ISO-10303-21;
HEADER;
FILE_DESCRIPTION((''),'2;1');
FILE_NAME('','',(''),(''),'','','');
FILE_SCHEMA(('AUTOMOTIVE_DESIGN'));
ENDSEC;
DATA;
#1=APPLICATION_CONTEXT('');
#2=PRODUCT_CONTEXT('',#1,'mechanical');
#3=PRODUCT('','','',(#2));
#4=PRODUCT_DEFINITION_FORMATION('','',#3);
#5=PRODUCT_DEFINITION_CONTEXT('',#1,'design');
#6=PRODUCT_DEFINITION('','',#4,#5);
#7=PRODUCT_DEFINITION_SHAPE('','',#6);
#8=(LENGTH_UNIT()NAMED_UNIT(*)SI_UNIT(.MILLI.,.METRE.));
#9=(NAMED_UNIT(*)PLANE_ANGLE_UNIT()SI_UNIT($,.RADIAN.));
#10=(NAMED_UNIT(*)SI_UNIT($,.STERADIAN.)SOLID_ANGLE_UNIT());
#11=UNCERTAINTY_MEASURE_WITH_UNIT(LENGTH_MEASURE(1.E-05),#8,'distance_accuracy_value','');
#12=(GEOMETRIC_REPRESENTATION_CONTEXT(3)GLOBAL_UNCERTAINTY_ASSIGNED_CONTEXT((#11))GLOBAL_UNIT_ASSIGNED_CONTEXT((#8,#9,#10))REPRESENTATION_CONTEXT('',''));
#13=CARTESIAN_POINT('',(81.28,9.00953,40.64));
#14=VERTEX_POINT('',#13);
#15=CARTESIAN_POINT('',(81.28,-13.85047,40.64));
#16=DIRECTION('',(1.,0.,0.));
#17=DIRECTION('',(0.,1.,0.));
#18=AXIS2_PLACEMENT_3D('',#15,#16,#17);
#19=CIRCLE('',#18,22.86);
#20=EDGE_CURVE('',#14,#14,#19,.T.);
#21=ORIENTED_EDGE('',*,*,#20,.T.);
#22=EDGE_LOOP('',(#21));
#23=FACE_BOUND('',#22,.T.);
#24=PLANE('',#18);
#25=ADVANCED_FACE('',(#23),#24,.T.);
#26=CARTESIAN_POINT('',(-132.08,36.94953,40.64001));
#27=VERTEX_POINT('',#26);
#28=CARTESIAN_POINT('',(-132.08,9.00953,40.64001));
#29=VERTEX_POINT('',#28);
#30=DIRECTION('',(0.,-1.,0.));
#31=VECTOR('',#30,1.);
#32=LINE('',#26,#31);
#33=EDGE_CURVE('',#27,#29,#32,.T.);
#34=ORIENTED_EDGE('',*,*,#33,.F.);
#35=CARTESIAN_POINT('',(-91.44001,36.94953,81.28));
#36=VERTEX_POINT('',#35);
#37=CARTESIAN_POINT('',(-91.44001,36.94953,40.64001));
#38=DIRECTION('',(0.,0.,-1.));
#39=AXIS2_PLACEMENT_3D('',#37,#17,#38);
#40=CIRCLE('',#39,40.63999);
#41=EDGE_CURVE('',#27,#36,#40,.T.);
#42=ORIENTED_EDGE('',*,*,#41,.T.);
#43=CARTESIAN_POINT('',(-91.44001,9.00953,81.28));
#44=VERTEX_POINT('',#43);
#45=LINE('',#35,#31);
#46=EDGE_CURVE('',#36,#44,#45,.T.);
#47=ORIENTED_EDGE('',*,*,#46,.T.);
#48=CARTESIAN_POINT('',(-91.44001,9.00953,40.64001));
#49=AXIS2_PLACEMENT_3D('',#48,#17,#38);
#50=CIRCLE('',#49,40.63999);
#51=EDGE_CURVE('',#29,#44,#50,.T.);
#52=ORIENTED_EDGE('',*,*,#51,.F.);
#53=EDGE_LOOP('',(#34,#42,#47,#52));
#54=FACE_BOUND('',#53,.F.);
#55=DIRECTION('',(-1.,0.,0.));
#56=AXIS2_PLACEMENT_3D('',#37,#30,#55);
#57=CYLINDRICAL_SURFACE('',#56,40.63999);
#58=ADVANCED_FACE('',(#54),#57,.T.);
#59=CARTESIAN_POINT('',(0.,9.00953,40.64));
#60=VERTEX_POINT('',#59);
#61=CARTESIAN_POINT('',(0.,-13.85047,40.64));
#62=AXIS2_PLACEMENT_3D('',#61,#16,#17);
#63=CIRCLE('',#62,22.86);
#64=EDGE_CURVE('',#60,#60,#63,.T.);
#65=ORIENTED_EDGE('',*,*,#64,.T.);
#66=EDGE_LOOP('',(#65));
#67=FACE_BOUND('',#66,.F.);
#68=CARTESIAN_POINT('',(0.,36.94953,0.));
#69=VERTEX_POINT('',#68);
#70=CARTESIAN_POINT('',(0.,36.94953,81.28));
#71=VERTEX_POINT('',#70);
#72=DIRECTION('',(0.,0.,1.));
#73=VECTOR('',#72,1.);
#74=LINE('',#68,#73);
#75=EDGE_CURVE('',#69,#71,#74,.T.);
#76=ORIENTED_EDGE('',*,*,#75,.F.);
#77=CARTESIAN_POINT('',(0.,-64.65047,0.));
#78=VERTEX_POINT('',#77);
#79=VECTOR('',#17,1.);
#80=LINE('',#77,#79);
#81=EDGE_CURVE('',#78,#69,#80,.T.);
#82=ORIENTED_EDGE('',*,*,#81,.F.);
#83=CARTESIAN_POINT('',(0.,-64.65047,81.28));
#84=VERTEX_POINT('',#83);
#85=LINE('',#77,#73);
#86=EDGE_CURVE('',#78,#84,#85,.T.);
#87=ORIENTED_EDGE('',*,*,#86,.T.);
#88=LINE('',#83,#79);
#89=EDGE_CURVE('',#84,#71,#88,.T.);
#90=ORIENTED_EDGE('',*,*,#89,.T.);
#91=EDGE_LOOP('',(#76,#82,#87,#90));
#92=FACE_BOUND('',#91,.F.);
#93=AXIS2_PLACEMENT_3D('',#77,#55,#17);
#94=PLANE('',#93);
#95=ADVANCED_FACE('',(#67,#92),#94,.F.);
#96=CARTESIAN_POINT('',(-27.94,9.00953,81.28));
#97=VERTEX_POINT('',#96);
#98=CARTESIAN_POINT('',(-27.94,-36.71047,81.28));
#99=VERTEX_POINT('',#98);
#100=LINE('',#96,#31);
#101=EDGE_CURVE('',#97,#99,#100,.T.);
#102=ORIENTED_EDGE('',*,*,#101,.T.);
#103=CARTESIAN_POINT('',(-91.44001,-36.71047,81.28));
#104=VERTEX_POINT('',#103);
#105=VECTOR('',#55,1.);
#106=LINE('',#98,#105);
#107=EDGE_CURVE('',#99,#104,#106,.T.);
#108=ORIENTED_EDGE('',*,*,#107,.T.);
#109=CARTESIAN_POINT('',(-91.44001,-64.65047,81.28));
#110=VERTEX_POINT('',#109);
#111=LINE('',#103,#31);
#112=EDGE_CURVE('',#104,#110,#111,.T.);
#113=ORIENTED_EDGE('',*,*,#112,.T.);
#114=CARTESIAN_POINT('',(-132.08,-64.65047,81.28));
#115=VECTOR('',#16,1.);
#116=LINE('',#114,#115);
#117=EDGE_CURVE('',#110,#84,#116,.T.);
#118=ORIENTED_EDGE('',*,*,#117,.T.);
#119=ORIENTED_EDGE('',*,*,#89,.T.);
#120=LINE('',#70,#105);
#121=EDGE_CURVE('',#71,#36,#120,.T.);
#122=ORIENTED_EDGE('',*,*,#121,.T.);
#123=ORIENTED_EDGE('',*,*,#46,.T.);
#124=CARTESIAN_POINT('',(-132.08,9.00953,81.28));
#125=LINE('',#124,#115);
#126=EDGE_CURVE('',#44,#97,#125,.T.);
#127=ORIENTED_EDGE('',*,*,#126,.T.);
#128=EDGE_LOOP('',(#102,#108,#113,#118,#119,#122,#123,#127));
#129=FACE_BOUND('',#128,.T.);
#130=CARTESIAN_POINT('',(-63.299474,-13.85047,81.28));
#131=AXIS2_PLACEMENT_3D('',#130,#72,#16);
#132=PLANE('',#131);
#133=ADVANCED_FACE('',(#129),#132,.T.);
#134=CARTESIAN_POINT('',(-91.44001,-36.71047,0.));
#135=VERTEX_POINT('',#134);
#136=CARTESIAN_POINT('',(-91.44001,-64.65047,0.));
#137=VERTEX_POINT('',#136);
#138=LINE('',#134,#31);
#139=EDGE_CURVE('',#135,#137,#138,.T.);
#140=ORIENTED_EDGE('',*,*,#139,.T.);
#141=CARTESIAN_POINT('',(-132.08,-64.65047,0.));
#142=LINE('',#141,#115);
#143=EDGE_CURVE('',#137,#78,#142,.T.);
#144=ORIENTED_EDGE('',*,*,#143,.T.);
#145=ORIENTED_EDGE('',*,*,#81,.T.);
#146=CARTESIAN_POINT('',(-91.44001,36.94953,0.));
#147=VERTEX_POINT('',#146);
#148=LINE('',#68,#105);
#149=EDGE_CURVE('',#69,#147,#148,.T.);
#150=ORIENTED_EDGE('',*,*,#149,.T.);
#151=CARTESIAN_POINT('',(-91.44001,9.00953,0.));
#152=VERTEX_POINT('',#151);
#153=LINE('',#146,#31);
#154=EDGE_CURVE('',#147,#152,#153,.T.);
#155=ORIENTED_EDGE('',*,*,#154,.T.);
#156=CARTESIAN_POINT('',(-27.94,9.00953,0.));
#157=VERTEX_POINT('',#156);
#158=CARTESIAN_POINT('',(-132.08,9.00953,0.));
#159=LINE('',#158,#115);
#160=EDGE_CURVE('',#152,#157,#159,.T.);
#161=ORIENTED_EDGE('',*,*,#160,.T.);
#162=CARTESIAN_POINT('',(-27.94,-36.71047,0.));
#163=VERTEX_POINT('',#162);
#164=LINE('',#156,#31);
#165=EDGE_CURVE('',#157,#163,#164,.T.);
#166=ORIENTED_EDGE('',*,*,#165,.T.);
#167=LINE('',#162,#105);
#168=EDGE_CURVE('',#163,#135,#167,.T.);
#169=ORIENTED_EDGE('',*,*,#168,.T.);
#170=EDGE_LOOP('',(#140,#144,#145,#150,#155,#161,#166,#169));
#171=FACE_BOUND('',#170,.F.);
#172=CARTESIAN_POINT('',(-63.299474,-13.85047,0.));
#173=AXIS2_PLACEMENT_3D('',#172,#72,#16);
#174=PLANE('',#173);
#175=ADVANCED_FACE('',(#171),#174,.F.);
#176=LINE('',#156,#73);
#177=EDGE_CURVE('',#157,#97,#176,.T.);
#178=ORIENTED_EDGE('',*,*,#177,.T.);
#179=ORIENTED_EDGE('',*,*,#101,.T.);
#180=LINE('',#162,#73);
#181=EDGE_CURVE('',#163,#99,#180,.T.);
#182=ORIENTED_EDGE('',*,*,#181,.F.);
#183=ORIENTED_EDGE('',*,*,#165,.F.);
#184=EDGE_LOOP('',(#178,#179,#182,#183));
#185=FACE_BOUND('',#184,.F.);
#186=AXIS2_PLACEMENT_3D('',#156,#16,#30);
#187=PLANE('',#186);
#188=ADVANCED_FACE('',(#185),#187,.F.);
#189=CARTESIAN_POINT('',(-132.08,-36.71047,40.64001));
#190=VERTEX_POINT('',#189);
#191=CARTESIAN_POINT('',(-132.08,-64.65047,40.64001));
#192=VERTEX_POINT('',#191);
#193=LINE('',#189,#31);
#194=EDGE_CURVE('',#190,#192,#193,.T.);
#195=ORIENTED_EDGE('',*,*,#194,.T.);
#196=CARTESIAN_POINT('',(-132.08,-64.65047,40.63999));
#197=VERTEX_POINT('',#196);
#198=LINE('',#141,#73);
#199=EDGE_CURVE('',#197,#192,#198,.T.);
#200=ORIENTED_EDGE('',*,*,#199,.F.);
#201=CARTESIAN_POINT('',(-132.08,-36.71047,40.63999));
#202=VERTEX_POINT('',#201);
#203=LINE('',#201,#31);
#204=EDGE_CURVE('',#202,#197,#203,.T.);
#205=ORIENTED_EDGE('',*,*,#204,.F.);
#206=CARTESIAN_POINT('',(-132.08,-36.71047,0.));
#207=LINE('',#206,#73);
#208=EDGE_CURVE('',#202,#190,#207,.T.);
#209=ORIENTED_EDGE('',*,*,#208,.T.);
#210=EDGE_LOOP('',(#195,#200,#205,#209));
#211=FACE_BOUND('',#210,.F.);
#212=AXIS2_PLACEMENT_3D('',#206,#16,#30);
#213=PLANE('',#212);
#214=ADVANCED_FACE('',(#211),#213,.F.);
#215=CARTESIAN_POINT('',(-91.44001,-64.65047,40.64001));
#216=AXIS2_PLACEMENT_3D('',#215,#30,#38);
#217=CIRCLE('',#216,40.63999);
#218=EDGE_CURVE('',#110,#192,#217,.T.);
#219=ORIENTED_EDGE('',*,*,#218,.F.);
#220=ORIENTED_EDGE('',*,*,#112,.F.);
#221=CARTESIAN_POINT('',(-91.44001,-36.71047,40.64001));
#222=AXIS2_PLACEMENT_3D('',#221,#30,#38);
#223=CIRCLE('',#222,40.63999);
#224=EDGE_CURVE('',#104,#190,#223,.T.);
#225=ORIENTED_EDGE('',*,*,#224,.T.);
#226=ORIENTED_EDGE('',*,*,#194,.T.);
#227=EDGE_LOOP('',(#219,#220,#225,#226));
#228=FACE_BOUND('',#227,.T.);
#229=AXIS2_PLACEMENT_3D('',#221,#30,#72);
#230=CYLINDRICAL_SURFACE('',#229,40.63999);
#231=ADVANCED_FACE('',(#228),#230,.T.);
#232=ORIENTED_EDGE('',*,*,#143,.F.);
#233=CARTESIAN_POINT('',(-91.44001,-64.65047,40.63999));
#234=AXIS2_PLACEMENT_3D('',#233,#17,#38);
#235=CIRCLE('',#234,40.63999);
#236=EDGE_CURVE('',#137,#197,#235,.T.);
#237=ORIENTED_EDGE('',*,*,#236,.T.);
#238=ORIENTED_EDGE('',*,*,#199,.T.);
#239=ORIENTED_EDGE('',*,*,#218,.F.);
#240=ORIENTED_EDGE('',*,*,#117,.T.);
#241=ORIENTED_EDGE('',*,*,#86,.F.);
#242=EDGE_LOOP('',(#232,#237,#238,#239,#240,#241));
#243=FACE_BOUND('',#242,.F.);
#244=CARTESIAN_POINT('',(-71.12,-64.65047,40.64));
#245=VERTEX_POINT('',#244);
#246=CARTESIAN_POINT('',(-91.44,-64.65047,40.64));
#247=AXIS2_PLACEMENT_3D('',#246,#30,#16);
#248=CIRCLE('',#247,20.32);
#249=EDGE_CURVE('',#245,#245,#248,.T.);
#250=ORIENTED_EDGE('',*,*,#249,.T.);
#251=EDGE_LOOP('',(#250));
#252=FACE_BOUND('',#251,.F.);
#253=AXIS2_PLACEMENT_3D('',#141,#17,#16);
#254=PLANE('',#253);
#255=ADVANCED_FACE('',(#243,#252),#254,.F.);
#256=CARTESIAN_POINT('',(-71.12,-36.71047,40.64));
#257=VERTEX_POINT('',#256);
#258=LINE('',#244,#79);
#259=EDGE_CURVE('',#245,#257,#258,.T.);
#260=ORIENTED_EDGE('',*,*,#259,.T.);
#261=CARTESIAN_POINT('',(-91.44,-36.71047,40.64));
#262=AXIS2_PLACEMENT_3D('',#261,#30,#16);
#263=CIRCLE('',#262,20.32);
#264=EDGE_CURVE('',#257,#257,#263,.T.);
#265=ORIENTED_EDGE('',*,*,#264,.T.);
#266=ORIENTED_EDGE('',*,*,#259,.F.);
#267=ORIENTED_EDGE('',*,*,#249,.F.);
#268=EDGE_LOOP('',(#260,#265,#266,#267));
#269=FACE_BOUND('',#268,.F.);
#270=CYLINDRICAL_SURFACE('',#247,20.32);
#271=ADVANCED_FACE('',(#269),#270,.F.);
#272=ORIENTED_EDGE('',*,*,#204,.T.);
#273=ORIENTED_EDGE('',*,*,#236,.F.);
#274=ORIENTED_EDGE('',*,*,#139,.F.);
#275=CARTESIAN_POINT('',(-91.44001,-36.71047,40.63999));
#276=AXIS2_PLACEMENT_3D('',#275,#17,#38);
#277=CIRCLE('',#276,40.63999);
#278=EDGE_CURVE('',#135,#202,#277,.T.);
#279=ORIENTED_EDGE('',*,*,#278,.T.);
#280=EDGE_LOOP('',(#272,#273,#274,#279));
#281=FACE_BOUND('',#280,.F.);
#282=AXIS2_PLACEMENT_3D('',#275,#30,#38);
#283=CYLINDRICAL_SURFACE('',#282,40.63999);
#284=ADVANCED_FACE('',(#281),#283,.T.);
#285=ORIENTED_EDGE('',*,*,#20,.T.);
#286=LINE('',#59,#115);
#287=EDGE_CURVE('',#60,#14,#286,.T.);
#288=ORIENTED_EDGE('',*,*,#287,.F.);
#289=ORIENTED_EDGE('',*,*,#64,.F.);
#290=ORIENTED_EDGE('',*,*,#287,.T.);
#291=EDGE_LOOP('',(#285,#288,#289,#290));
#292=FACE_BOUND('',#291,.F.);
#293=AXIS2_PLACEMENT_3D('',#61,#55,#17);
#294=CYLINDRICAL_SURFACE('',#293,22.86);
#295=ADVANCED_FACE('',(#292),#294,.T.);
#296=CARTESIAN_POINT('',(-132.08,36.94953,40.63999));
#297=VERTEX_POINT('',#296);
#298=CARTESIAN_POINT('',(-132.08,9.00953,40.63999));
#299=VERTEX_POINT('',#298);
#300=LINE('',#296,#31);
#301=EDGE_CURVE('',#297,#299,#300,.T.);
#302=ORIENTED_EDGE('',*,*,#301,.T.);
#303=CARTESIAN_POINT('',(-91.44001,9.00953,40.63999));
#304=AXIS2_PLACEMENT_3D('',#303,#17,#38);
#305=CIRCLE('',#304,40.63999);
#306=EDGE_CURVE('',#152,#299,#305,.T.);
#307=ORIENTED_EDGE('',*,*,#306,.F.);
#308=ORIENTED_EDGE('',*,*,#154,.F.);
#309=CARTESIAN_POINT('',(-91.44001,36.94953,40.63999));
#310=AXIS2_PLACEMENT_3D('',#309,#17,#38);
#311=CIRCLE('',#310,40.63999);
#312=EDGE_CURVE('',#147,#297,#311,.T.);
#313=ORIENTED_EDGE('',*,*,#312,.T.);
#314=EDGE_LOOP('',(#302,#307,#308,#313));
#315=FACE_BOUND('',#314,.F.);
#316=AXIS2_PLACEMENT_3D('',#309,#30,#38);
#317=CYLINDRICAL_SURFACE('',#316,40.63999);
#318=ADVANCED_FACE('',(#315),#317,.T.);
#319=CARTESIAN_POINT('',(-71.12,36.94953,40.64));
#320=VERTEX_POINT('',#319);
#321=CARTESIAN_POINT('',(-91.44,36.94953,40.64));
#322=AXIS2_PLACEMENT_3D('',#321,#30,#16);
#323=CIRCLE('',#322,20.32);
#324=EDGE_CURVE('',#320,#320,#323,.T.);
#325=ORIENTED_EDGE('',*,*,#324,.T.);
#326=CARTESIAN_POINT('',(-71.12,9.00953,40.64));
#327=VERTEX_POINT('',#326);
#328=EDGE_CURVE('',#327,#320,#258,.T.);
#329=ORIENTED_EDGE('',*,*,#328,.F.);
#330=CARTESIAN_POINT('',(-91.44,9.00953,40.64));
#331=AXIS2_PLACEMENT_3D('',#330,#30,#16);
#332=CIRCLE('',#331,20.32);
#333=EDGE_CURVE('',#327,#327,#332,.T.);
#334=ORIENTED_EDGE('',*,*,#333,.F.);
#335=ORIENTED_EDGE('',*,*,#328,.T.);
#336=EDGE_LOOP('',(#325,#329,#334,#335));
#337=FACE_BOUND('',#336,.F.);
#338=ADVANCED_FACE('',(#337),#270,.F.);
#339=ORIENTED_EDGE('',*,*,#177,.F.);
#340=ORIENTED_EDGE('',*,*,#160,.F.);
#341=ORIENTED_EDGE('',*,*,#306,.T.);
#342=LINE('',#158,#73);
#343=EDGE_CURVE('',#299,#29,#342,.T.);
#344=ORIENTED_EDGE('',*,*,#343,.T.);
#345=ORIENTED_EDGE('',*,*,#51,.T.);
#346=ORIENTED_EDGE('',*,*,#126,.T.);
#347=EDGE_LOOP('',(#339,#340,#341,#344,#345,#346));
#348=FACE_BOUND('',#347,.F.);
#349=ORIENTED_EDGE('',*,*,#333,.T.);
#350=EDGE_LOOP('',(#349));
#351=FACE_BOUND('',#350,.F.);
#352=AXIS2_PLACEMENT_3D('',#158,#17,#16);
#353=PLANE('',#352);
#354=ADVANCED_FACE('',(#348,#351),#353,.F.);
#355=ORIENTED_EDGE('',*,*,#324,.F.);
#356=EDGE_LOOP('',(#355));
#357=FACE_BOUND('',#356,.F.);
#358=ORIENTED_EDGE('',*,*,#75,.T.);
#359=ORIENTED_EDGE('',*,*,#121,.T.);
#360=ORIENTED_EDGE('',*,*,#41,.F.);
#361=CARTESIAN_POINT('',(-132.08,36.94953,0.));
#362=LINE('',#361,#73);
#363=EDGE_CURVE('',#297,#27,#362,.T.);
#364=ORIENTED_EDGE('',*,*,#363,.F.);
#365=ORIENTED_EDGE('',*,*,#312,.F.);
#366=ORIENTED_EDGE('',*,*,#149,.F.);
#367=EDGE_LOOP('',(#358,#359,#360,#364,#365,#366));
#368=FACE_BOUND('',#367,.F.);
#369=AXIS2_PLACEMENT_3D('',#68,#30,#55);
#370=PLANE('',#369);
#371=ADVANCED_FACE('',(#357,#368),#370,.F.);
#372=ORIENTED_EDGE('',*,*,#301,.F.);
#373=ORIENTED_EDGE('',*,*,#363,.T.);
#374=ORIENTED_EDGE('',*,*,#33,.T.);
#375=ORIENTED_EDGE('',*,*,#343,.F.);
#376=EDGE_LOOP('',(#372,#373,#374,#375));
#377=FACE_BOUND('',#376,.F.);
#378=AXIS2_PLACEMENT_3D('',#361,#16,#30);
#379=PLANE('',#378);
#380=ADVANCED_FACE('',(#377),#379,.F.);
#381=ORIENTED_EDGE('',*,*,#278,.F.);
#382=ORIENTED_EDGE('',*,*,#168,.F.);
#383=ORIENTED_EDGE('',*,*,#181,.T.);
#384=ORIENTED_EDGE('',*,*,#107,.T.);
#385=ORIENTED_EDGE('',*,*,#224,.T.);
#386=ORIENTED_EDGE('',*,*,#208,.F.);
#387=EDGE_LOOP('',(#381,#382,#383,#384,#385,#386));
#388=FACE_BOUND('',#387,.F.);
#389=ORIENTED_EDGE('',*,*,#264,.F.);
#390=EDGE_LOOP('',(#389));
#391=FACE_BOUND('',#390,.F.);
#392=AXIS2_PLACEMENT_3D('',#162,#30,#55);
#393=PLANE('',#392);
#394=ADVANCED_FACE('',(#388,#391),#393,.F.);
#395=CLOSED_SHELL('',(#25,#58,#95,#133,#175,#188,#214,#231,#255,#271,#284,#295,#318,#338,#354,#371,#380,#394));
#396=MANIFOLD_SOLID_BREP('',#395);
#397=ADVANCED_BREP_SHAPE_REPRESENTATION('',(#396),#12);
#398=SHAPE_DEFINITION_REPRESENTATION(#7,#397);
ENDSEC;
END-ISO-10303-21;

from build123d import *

# Parameters (mm, degrees)
F1_DEPTH = 81.28
F2_R     = 20.32
F3_DEPTH = 101.6
F4_R     = 40.63999
F5_R     = 40.63999
F6_R     = 22.86
F7_DEPTH = 81.28


# Not quite as in the source:
# - a fillet or chamfer is up to 0.001 mm smaller than in the source, because OpenCascade refuses the exact size


with BuildPart() as f1:
    # F0 (on Top) → F1 (new body)
    with BuildSketch(Plane.XY):
        Polygon((0, -36.7104701635), (0, 0), (0, 9.0095298365), (0, 36.9495298365), (-132.08, 36.9495298365), (-132.08, 9.0095298365), (-27.94, 9.0095298365), (-27.94, -36.7104701635), (-132.08, -36.7104701635), (-132.08, -64.6504701635), (0, -64.6504701635), align=None)
    extrude(amount=F1_DEPTH)

    # F2 (on face) → F3 (cut)
    with BuildSketch(Plane.XZ.offset(64.6504701635)):
        with Locations((-91.44, 40.64)):
            Circle(F2_R)
    extrude(amount=-F3_DEPTH, mode=Mode.SUBTRACT)

    # F4 (radius 40.64 in the source; OpenCascade refuses exactly that, so slightly less here)
    f4_edges = [f1.edges().sort_by_distance(p)[0] for p in [
        (-132.08, -50.68047, 81.28),
        (-132.08, -50.68047, 0),
    ]]
    fillet(f4_edges, radius=F4_R)

    # F5 (radius 40.64 in the source; OpenCascade refuses exactly that, so slightly less here)
    f5_edges = [f1.edges().sort_by_distance(p)[0] for p in [
        (-132.08, 22.97953, 81.28),
        (-132.08, 22.97953, 0),
    ]]
    fillet(f5_edges, radius=F5_R)

    # F6 (on face) → F7 (join)
    with BuildSketch(Plane.YZ):
        with Locations((-13.8504701635, 40.64)):
            Circle(F6_R)
    extrude(amount=F7_DEPTH)


solid = f1.part
